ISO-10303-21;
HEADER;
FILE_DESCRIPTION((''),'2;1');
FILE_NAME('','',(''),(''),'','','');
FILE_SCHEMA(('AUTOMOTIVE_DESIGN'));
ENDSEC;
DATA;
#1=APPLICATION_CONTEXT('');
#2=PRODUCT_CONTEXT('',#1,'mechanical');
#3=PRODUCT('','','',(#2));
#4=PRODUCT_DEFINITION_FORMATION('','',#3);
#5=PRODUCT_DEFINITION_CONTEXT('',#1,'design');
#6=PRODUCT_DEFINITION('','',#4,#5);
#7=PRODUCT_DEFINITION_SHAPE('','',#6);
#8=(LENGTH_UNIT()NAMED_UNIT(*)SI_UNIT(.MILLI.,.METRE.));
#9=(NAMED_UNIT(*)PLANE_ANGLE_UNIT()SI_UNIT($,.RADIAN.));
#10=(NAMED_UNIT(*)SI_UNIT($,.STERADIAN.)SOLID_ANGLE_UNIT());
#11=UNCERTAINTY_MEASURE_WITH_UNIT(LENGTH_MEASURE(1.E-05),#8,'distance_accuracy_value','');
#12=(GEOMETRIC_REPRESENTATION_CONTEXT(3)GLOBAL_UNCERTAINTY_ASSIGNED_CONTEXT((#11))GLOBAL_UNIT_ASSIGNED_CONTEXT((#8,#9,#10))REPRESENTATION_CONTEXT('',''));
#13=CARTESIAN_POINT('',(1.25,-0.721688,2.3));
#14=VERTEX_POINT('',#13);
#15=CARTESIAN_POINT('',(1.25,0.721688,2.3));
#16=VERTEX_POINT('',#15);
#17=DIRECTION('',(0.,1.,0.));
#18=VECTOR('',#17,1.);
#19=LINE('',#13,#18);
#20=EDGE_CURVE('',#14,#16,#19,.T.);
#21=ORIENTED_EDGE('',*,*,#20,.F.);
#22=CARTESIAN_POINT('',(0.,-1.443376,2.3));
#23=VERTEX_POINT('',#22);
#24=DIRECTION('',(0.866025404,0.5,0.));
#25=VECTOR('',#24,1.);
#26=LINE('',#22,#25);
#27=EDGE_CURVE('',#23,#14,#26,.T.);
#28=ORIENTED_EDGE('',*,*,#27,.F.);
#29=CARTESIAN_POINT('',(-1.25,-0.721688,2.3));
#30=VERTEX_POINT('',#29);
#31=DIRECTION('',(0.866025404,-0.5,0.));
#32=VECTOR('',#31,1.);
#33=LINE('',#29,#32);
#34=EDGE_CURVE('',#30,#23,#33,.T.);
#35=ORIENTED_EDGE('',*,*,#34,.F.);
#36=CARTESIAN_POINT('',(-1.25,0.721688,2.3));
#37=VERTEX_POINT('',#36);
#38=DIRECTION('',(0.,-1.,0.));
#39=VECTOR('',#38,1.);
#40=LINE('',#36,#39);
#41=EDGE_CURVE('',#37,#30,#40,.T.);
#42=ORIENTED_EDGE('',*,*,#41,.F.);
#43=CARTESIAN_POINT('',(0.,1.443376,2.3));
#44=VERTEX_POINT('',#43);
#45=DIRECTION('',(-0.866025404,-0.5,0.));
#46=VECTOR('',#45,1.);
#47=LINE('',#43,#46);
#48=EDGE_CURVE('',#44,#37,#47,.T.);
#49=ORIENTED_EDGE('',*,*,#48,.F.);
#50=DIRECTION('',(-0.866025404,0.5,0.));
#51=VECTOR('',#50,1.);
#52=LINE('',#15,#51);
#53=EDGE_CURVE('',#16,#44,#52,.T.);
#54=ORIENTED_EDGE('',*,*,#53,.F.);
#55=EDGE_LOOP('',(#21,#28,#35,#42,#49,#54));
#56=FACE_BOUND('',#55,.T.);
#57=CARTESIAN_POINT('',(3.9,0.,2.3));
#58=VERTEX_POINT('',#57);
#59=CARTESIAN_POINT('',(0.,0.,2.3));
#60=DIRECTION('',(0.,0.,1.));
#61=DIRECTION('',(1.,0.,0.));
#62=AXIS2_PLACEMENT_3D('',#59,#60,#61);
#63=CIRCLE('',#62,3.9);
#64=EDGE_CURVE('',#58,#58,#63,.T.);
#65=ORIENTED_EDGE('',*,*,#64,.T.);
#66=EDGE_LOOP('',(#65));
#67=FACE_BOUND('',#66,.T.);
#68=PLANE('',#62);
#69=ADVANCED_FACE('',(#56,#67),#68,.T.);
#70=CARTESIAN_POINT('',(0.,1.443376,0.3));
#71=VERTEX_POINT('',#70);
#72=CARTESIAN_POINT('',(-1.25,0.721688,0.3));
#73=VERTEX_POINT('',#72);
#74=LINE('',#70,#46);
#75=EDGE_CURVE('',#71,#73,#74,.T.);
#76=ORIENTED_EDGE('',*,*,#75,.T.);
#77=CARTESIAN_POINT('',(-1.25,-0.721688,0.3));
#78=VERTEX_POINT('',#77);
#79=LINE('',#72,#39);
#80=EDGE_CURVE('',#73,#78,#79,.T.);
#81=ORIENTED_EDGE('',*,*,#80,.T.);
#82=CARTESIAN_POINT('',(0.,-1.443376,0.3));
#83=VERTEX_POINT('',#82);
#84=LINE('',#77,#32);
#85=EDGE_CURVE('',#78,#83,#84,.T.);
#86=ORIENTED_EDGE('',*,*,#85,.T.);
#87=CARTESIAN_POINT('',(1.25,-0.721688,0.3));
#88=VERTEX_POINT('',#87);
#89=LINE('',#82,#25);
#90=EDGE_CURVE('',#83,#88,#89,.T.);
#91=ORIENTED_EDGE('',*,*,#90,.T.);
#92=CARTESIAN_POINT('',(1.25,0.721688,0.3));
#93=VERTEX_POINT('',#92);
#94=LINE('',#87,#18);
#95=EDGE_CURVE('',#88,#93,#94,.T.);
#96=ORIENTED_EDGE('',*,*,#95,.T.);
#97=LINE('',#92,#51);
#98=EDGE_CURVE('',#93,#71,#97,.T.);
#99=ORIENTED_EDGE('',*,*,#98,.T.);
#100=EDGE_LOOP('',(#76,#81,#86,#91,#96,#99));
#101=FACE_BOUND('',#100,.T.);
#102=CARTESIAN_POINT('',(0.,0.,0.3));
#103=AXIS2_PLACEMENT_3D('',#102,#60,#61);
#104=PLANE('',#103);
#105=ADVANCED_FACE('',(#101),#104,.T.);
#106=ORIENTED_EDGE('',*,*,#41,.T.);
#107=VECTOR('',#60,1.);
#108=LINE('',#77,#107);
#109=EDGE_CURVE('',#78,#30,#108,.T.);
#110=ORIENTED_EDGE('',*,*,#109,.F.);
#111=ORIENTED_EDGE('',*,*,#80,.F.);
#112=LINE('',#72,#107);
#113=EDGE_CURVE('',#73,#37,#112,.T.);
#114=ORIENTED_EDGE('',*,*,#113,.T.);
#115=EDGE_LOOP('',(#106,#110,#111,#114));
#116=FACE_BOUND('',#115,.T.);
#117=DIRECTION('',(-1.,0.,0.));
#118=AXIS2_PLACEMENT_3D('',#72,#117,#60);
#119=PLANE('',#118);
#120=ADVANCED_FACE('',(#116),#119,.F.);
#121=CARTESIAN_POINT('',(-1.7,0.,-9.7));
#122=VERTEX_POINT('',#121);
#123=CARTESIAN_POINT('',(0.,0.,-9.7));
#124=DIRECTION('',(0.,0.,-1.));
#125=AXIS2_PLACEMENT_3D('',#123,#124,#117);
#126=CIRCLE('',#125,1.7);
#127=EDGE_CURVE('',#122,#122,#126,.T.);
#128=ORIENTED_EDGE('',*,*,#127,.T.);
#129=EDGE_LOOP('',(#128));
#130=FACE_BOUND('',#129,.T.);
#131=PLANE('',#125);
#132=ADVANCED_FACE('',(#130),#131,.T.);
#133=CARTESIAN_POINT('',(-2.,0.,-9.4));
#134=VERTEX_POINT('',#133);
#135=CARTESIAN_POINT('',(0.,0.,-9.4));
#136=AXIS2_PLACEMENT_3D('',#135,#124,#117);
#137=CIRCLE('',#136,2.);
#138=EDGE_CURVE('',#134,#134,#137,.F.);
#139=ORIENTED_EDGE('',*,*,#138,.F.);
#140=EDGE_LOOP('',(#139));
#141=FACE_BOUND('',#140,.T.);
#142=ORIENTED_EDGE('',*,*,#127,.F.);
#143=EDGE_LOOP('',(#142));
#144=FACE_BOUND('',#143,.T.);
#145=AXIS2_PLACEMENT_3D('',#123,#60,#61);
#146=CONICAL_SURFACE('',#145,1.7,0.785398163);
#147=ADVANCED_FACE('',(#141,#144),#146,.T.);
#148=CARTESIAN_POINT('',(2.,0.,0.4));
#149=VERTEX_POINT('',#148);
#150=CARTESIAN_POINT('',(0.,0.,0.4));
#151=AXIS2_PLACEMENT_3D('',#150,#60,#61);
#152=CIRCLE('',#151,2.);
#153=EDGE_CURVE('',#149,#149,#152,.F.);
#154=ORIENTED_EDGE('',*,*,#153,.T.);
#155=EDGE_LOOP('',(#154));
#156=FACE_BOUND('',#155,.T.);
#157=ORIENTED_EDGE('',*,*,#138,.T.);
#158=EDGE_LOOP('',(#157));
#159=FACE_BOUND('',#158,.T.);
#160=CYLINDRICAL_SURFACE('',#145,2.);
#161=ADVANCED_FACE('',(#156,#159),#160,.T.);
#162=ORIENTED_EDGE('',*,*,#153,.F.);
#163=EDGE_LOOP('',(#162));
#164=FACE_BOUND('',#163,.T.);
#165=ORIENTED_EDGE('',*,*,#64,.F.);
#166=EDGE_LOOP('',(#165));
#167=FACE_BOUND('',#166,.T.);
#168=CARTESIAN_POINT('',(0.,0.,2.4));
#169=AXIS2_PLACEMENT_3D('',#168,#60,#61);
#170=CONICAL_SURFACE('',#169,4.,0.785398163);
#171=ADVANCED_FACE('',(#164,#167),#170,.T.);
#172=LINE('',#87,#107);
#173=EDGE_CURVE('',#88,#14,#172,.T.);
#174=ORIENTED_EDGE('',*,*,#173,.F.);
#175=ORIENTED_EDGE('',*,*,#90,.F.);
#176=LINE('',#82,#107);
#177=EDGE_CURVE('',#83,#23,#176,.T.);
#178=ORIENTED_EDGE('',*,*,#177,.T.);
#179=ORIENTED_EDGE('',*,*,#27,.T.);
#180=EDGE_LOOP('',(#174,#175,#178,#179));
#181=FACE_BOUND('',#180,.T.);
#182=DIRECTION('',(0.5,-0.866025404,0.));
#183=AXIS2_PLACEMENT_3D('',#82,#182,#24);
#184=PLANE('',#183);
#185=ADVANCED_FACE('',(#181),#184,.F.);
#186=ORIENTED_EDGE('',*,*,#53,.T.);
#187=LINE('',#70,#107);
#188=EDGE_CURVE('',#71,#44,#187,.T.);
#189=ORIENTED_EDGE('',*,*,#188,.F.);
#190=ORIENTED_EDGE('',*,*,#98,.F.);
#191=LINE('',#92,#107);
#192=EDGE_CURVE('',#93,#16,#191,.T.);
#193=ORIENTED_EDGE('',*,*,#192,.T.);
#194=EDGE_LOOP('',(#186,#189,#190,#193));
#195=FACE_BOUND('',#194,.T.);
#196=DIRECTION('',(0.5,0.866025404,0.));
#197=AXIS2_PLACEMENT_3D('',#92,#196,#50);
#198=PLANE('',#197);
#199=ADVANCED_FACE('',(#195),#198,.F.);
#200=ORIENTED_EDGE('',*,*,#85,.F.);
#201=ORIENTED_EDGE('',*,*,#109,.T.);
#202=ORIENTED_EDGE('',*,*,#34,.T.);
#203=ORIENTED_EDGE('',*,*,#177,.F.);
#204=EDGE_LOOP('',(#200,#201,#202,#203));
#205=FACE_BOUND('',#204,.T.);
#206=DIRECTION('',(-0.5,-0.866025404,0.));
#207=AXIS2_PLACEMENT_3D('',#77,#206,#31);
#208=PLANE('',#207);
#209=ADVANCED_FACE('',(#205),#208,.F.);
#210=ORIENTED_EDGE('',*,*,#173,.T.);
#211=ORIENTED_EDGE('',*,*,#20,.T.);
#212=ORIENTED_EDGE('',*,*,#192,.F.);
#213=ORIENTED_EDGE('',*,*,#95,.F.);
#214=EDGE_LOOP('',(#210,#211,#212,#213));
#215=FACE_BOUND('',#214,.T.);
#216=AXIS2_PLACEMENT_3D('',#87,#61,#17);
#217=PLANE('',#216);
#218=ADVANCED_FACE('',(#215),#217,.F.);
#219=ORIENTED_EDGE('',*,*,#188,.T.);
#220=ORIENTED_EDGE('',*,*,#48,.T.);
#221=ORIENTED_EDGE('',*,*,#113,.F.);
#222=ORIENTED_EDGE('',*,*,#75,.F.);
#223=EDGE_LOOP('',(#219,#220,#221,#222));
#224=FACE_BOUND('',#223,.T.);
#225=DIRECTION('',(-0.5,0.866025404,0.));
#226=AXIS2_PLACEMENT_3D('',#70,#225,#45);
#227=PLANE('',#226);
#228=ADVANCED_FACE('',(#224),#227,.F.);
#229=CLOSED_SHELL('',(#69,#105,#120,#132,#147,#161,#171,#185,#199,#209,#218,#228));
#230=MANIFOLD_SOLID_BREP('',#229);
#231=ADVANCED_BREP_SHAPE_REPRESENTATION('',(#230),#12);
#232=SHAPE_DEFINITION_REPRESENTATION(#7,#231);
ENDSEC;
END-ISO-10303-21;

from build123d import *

# Parameters (mm, degrees)
SKETCH1_R           = 4
BOSS_EXTRUDE1_DEPTH = 2.3
SKETCH2_R           = 2
BOSS_EXTRUDE2_DEPTH = 9.7
CHAMFER1_SIZE       = 0.3
CUT_EXTRUDE1_DEPTH  = 2
CHAMFER2_SIZE       = 2.4


with BuildPart() as part:
    # Sketch1 → Boss-Extrude1 (new body)
    with BuildSketch(Plane.XY):
        Circle(SKETCH1_R)
    extrude(amount=BOSS_EXTRUDE1_DEPTH)

    # Sketch2 → Boss-Extrude2 (add)
    with BuildSketch(Plane(origin=(0, 0, 0), x_dir=(-1, 0, 0), z_dir=(0, 0, -1))):
        with Locations(Location((0, 0, 0), (0, 0, 180))):
            Circle(SKETCH2_R)
    extrude(amount=BOSS_EXTRUDE2_DEPTH)

    # Chamfer1
    chamfer1_edges = [part.edges().sort_by_distance(p)[0] for p in [
        (-2, 0, -9.7),
    ]]
    chamfer(chamfer1_edges, length=CHAMFER1_SIZE)

    # Sketch3 → Cut-Extrude1 (cut)
    with BuildSketch(Plane.XY.offset(2.3)):
        Polygon((0, 1.443375673), (-1.25, 0.721687836), (-1.25, -0.721687836), (0, -1.443375673), (1.25, -0.721687836), (1.25, 0.721687836), align=None)
    extrude(amount=-CUT_EXTRUDE1_DEPTH, mode=Mode.SUBTRACT)

    # Chamfer2
    # the kernel refuses this chamfer: 2.4 mm, written as the material it takes off along each edge
    with BuildSketch(Plane(origin=(0, 0, 0), x_dir=(1, 0, 0), z_dir=(0, -1, 0))) as chamfer2_piece_1_section:
        Polygon((4 - CHAMFER2_SIZE, 0), (4, CHAMFER2_SIZE), (4, 0), align=None)
    chamfer2_piece_1 = revolve(axis=Axis((0, 0, 0), (0, 0, 1)), mode=Mode.PRIVATE)
    chamfer2_piece_1 = chamfer2_piece_1 - Plane(origin=(0, 0, 1.405884102), x_dir=(1, 0, 0), z_dir=(0, 0, 1)) * Cylinder(2, 16, mode=Mode.PRIVATE)
    add(chamfer2_piece_1, mode=Mode.SUBTRACT)


solid = part.part
